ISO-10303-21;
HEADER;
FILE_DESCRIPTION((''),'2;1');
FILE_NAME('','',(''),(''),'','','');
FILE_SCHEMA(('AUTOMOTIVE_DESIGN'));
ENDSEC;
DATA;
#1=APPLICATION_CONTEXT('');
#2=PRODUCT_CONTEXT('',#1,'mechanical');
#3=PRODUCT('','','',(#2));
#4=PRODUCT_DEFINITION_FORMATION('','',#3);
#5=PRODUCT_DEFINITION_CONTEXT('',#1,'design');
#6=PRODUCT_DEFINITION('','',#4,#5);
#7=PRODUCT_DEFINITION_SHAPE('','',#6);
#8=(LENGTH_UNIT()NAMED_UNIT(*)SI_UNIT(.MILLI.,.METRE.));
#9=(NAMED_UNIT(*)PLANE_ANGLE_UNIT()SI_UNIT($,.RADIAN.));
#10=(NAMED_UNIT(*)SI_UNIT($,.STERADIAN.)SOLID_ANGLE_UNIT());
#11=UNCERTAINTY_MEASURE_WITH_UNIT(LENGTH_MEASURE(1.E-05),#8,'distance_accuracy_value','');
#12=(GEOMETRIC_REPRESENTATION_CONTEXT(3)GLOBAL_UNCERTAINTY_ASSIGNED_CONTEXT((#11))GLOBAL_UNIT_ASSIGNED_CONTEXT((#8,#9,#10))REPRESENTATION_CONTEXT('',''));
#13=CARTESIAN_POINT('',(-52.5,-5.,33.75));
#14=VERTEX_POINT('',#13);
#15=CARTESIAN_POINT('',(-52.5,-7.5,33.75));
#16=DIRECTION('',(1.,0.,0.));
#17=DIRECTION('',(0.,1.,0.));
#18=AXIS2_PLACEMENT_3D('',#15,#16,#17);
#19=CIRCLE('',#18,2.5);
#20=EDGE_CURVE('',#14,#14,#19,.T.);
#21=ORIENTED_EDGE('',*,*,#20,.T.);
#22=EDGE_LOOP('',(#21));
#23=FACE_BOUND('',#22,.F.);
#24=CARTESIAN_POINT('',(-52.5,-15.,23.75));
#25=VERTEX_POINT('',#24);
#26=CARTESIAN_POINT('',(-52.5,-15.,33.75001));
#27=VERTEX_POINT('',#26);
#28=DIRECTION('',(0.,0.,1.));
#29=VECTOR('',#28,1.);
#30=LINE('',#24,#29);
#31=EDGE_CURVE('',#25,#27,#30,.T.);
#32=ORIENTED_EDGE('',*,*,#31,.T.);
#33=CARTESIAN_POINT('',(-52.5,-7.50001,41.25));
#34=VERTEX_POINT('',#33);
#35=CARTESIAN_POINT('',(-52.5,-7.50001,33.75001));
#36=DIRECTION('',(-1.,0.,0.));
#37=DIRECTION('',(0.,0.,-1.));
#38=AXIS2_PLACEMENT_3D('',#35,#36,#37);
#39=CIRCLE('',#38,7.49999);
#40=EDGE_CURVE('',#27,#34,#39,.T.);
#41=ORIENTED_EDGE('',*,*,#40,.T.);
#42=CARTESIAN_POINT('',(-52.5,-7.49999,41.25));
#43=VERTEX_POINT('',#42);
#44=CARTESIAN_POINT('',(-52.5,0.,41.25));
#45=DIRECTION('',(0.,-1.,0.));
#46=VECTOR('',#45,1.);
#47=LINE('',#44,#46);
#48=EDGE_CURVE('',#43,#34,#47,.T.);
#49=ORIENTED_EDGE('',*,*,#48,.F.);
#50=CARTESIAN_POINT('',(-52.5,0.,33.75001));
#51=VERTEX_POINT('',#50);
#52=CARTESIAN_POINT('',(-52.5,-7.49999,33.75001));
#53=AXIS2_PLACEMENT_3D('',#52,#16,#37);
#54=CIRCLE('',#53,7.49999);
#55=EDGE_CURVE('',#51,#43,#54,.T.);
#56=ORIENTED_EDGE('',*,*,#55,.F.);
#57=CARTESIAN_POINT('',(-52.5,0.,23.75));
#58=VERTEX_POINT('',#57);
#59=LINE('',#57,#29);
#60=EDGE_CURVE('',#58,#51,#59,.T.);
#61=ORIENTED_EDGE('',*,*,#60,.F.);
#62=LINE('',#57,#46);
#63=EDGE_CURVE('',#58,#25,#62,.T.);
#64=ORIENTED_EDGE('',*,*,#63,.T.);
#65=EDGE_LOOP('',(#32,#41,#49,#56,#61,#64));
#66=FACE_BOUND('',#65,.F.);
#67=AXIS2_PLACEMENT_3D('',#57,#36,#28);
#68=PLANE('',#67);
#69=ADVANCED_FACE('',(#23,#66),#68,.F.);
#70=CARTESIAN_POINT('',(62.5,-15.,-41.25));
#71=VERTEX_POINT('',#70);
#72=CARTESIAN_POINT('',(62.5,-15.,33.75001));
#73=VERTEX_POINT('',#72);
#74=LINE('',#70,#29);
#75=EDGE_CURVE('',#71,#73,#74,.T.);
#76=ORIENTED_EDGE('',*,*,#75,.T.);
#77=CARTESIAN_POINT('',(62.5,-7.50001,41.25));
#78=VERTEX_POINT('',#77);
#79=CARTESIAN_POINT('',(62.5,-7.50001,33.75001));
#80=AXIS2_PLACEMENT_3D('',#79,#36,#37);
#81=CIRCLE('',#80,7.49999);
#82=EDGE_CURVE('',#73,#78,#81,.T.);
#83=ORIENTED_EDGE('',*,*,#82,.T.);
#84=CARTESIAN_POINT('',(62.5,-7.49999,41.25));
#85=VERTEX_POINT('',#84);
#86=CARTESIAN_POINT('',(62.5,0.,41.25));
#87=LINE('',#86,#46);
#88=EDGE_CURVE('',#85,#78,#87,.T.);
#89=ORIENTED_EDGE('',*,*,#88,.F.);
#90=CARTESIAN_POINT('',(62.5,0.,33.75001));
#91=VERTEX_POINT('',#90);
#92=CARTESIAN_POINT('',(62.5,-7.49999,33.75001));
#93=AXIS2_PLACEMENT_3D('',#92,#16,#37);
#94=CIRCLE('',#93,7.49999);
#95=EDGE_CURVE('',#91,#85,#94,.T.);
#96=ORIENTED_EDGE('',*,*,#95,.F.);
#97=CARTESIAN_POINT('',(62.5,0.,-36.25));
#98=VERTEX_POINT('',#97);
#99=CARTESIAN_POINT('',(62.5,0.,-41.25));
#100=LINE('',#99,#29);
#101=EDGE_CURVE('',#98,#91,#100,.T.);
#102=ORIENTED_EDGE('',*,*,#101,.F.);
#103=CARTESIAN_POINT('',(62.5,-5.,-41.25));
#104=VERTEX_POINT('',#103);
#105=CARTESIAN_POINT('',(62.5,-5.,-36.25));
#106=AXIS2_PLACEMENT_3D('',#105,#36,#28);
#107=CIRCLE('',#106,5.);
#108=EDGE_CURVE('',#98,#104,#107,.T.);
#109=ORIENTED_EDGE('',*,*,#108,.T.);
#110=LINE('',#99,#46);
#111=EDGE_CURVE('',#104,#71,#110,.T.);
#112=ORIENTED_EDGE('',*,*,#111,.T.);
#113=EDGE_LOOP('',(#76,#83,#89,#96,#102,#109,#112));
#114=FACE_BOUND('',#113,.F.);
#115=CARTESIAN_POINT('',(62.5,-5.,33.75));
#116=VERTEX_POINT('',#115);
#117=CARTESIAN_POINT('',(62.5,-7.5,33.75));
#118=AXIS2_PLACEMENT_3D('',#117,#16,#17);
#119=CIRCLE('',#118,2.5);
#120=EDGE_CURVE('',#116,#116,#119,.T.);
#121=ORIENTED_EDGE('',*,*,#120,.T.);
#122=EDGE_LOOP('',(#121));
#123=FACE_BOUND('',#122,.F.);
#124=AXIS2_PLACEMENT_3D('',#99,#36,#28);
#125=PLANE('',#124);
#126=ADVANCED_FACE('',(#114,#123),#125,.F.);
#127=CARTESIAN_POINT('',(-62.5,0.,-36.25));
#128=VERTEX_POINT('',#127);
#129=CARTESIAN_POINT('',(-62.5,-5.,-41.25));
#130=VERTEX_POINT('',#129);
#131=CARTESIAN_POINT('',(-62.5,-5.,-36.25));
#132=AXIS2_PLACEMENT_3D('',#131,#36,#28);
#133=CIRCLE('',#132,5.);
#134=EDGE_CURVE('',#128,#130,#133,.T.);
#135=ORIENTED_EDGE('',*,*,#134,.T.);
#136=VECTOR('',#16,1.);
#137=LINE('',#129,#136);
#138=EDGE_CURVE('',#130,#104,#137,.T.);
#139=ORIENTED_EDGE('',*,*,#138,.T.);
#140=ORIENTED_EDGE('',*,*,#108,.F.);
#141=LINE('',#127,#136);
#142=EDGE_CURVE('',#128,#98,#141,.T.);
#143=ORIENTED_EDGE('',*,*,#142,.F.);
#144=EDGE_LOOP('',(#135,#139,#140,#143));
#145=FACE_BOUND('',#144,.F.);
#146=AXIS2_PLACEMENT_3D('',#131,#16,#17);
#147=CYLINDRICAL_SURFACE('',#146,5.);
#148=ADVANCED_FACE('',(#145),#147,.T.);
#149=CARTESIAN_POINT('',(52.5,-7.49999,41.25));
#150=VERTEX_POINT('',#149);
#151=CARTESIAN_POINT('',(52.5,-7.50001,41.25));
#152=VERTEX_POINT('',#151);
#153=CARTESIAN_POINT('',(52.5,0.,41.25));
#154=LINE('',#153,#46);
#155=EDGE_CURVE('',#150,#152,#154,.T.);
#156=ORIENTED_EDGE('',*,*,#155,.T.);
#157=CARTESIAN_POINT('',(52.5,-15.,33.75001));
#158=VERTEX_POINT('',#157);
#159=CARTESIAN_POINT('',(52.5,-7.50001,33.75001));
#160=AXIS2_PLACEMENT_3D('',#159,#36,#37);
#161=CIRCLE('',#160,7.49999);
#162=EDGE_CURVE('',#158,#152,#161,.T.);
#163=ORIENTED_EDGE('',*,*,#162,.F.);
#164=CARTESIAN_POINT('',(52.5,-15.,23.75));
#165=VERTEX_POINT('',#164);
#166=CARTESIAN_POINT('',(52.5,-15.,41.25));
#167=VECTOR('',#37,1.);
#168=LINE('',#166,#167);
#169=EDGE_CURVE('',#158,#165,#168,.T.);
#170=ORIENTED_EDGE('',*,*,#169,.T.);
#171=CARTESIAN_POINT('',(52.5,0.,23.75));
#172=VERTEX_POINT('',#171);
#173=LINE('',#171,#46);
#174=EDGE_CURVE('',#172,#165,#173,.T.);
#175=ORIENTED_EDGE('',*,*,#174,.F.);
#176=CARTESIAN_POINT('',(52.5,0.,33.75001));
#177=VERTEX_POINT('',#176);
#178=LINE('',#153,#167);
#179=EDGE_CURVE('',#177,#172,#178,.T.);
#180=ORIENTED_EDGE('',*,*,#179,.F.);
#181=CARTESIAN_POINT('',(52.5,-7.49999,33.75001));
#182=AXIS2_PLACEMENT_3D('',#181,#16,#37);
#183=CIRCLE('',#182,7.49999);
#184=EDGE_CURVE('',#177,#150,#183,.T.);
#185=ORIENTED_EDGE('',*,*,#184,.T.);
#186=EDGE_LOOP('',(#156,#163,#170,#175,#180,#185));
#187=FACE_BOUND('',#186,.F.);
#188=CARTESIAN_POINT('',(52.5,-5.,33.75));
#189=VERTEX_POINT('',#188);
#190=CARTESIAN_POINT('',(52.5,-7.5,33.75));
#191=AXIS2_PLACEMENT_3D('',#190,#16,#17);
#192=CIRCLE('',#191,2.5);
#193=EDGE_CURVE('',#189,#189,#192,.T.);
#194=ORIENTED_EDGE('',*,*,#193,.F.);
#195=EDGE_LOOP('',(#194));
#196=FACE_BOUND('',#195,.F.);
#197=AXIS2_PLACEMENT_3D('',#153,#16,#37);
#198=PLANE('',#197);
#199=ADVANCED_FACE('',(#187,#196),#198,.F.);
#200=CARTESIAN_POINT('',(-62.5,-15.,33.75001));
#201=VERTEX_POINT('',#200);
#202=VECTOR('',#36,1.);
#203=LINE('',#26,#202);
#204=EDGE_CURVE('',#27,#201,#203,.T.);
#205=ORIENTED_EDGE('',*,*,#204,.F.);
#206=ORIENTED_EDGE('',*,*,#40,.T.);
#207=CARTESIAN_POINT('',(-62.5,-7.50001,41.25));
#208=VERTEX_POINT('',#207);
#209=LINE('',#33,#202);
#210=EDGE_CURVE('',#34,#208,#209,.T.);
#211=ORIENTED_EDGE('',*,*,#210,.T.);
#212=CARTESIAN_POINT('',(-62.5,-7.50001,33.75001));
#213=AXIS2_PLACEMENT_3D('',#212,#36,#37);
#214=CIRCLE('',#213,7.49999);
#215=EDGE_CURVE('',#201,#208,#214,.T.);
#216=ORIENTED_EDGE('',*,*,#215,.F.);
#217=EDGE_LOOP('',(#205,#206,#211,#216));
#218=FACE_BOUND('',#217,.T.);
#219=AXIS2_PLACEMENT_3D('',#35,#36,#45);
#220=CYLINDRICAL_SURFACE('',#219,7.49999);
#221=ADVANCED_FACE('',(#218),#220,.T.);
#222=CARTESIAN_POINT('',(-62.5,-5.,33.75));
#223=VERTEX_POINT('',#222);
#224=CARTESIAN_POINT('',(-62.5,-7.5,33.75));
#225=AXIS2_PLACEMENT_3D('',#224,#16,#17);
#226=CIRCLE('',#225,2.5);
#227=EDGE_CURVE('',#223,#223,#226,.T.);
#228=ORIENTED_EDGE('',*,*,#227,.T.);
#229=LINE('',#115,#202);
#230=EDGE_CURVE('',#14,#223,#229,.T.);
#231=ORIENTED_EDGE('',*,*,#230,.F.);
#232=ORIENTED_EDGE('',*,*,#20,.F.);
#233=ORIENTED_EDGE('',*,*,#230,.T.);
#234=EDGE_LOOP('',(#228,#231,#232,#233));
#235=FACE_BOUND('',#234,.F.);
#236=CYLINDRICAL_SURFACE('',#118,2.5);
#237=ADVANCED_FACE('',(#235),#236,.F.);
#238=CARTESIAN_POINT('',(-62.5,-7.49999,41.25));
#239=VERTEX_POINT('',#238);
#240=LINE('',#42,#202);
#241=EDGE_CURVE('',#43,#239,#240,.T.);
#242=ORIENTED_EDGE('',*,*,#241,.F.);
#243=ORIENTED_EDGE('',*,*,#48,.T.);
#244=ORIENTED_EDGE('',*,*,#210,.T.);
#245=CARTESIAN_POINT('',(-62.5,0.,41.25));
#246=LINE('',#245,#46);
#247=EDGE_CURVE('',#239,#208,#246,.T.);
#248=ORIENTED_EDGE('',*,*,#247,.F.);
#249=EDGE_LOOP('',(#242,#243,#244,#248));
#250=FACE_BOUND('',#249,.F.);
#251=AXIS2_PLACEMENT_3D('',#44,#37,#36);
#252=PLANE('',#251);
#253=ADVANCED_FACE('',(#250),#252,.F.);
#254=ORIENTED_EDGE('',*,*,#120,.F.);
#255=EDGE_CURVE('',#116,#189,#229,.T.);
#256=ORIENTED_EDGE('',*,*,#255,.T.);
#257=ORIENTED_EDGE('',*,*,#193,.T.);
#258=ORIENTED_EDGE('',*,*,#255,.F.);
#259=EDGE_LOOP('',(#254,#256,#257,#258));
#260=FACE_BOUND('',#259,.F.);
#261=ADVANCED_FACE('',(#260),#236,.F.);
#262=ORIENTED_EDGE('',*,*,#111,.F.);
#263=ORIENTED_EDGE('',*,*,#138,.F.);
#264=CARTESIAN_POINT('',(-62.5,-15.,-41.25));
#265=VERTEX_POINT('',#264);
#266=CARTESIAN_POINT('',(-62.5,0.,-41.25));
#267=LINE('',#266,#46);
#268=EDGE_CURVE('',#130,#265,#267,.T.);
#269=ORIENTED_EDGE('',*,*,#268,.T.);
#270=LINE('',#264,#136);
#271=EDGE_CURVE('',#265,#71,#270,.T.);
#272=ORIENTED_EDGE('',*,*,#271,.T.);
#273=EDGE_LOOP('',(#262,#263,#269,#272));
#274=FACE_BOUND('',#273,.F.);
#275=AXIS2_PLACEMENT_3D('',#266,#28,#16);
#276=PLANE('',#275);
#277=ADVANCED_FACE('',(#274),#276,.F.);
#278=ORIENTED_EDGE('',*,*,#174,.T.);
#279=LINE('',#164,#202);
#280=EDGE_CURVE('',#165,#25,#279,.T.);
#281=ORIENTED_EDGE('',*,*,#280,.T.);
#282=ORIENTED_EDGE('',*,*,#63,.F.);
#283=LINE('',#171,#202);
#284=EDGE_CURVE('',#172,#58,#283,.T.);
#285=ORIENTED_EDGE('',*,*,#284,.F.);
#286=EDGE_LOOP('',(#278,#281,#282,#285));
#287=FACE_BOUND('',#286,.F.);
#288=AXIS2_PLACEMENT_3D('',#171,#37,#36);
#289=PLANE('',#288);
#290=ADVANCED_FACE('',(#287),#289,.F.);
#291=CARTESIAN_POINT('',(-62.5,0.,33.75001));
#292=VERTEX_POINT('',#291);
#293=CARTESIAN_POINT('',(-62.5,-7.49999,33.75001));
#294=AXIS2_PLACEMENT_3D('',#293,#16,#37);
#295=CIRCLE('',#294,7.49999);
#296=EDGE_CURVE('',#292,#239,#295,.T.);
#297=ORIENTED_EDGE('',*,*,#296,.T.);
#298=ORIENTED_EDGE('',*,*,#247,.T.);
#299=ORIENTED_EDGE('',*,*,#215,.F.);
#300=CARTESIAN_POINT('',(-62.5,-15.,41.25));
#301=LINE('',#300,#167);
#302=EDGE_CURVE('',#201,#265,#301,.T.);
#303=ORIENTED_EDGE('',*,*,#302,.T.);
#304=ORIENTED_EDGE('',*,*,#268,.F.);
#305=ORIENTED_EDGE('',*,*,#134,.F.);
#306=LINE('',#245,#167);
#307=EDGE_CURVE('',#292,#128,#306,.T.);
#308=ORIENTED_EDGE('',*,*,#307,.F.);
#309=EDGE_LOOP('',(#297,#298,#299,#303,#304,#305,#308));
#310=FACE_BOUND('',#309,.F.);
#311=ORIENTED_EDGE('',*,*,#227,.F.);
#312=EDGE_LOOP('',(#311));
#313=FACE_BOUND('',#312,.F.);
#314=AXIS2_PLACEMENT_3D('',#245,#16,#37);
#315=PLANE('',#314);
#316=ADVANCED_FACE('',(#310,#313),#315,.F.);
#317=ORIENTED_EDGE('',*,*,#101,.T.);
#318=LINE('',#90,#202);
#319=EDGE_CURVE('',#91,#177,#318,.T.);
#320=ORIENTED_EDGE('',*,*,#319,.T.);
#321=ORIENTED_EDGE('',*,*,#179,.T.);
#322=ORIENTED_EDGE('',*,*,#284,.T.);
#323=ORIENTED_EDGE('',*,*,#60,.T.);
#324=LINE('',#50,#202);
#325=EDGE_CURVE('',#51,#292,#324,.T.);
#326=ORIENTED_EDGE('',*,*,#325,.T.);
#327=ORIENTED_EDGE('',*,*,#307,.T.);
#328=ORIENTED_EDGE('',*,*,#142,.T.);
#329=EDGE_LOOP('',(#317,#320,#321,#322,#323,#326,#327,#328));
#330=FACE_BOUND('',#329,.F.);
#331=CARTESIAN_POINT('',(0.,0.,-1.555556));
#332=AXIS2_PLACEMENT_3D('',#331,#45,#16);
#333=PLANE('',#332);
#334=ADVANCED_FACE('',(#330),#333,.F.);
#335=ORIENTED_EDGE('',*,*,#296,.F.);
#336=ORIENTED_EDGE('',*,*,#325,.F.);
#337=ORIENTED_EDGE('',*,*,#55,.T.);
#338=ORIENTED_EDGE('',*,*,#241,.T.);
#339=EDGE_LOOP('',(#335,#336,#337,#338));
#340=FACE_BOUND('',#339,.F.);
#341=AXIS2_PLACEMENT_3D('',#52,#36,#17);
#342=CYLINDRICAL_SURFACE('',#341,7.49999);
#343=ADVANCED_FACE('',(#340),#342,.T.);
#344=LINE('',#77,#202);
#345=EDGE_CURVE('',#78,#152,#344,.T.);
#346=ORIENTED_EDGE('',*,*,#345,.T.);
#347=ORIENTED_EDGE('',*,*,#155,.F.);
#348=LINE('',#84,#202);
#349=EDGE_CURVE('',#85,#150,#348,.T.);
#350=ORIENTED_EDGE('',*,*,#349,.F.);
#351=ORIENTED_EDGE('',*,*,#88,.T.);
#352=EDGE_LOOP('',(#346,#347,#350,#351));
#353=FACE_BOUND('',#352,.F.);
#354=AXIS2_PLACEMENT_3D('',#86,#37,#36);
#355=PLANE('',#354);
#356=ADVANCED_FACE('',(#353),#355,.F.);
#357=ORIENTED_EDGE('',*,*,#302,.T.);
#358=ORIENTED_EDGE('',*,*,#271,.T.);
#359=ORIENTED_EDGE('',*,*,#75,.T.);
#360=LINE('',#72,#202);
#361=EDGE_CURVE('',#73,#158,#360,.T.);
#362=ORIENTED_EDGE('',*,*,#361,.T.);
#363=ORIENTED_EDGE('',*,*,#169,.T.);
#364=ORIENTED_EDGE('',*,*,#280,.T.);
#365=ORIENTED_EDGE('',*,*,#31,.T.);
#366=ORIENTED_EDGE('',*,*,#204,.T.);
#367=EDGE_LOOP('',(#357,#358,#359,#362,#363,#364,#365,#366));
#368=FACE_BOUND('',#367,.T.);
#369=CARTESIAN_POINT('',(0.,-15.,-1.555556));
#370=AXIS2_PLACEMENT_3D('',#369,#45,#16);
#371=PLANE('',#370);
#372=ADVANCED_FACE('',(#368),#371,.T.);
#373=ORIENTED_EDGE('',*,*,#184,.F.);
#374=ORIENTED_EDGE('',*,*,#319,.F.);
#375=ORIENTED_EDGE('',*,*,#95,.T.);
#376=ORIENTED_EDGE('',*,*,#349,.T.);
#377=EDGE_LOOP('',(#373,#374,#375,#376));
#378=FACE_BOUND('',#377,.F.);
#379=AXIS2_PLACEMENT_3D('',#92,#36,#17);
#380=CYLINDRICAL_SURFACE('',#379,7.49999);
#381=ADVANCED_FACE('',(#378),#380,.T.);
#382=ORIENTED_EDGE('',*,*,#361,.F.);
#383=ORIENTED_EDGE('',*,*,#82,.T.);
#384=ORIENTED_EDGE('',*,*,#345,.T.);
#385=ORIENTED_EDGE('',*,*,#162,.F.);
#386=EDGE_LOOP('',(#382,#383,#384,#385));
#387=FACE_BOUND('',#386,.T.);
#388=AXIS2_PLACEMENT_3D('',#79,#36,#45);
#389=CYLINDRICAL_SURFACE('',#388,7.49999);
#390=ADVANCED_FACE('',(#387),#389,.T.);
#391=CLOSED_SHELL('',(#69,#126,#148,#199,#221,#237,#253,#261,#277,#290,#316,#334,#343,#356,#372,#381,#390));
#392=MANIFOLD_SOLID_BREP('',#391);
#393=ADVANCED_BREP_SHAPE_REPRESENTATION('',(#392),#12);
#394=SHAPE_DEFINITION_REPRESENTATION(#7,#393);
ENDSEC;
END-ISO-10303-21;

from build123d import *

# Parameters (mm, degrees)
F1_DEPTH = 15
F2_R     = 2.5
F3_DEPTH = 125.001
F4_R     = 7.49999
F5_R     = 5


# Not quite as in the source:
# - a fillet or chamfer is up to 0.001 mm smaller than in the source, because OpenCascade refuses the exact size


with BuildPart() as f1:
    # F0 (on Front) → F1 (new body)
    with BuildSketch(Plane.XZ):
        Polygon((-62.5, 23.75), (-62.5, -41.25), (62.5, -41.25), (62.5, 23.75), (62.5, 41.25), (52.5, 41.25), (52.5, 23.75), (-52.5, 23.75), (-52.5, 41.25), (-62.5, 41.25), align=None)
    extrude(amount=F1_DEPTH)

    # F2 (on face) → F3 (cut, through all)
    with BuildSketch(Plane.YZ.offset(62.5)):
        with Locations((-7.5, 33.75)):
            Circle(F2_R)
    extrude(amount=-F3_DEPTH, mode=Mode.SUBTRACT)

    # F4 (radius 7.5 in the source; OpenCascade refuses exactly that, so slightly less here)
    f4_edges = [f1.edges().sort_by_distance(p)[0] for p in [
        (57.5, 0, 41.25),
        (57.5, -15, 41.25),
        (-57.5, -15, 41.25),
        (-57.5, 0, 41.25),
    ]]
    fillet(f4_edges, radius=F4_R)

    # F5
    f5_edges = [f1.edges().sort_by_distance(p)[0] for p in [
        (0, 0, -41.25),
    ]]
    fillet(f5_edges, radius=F5_R)


solid = f1.part
